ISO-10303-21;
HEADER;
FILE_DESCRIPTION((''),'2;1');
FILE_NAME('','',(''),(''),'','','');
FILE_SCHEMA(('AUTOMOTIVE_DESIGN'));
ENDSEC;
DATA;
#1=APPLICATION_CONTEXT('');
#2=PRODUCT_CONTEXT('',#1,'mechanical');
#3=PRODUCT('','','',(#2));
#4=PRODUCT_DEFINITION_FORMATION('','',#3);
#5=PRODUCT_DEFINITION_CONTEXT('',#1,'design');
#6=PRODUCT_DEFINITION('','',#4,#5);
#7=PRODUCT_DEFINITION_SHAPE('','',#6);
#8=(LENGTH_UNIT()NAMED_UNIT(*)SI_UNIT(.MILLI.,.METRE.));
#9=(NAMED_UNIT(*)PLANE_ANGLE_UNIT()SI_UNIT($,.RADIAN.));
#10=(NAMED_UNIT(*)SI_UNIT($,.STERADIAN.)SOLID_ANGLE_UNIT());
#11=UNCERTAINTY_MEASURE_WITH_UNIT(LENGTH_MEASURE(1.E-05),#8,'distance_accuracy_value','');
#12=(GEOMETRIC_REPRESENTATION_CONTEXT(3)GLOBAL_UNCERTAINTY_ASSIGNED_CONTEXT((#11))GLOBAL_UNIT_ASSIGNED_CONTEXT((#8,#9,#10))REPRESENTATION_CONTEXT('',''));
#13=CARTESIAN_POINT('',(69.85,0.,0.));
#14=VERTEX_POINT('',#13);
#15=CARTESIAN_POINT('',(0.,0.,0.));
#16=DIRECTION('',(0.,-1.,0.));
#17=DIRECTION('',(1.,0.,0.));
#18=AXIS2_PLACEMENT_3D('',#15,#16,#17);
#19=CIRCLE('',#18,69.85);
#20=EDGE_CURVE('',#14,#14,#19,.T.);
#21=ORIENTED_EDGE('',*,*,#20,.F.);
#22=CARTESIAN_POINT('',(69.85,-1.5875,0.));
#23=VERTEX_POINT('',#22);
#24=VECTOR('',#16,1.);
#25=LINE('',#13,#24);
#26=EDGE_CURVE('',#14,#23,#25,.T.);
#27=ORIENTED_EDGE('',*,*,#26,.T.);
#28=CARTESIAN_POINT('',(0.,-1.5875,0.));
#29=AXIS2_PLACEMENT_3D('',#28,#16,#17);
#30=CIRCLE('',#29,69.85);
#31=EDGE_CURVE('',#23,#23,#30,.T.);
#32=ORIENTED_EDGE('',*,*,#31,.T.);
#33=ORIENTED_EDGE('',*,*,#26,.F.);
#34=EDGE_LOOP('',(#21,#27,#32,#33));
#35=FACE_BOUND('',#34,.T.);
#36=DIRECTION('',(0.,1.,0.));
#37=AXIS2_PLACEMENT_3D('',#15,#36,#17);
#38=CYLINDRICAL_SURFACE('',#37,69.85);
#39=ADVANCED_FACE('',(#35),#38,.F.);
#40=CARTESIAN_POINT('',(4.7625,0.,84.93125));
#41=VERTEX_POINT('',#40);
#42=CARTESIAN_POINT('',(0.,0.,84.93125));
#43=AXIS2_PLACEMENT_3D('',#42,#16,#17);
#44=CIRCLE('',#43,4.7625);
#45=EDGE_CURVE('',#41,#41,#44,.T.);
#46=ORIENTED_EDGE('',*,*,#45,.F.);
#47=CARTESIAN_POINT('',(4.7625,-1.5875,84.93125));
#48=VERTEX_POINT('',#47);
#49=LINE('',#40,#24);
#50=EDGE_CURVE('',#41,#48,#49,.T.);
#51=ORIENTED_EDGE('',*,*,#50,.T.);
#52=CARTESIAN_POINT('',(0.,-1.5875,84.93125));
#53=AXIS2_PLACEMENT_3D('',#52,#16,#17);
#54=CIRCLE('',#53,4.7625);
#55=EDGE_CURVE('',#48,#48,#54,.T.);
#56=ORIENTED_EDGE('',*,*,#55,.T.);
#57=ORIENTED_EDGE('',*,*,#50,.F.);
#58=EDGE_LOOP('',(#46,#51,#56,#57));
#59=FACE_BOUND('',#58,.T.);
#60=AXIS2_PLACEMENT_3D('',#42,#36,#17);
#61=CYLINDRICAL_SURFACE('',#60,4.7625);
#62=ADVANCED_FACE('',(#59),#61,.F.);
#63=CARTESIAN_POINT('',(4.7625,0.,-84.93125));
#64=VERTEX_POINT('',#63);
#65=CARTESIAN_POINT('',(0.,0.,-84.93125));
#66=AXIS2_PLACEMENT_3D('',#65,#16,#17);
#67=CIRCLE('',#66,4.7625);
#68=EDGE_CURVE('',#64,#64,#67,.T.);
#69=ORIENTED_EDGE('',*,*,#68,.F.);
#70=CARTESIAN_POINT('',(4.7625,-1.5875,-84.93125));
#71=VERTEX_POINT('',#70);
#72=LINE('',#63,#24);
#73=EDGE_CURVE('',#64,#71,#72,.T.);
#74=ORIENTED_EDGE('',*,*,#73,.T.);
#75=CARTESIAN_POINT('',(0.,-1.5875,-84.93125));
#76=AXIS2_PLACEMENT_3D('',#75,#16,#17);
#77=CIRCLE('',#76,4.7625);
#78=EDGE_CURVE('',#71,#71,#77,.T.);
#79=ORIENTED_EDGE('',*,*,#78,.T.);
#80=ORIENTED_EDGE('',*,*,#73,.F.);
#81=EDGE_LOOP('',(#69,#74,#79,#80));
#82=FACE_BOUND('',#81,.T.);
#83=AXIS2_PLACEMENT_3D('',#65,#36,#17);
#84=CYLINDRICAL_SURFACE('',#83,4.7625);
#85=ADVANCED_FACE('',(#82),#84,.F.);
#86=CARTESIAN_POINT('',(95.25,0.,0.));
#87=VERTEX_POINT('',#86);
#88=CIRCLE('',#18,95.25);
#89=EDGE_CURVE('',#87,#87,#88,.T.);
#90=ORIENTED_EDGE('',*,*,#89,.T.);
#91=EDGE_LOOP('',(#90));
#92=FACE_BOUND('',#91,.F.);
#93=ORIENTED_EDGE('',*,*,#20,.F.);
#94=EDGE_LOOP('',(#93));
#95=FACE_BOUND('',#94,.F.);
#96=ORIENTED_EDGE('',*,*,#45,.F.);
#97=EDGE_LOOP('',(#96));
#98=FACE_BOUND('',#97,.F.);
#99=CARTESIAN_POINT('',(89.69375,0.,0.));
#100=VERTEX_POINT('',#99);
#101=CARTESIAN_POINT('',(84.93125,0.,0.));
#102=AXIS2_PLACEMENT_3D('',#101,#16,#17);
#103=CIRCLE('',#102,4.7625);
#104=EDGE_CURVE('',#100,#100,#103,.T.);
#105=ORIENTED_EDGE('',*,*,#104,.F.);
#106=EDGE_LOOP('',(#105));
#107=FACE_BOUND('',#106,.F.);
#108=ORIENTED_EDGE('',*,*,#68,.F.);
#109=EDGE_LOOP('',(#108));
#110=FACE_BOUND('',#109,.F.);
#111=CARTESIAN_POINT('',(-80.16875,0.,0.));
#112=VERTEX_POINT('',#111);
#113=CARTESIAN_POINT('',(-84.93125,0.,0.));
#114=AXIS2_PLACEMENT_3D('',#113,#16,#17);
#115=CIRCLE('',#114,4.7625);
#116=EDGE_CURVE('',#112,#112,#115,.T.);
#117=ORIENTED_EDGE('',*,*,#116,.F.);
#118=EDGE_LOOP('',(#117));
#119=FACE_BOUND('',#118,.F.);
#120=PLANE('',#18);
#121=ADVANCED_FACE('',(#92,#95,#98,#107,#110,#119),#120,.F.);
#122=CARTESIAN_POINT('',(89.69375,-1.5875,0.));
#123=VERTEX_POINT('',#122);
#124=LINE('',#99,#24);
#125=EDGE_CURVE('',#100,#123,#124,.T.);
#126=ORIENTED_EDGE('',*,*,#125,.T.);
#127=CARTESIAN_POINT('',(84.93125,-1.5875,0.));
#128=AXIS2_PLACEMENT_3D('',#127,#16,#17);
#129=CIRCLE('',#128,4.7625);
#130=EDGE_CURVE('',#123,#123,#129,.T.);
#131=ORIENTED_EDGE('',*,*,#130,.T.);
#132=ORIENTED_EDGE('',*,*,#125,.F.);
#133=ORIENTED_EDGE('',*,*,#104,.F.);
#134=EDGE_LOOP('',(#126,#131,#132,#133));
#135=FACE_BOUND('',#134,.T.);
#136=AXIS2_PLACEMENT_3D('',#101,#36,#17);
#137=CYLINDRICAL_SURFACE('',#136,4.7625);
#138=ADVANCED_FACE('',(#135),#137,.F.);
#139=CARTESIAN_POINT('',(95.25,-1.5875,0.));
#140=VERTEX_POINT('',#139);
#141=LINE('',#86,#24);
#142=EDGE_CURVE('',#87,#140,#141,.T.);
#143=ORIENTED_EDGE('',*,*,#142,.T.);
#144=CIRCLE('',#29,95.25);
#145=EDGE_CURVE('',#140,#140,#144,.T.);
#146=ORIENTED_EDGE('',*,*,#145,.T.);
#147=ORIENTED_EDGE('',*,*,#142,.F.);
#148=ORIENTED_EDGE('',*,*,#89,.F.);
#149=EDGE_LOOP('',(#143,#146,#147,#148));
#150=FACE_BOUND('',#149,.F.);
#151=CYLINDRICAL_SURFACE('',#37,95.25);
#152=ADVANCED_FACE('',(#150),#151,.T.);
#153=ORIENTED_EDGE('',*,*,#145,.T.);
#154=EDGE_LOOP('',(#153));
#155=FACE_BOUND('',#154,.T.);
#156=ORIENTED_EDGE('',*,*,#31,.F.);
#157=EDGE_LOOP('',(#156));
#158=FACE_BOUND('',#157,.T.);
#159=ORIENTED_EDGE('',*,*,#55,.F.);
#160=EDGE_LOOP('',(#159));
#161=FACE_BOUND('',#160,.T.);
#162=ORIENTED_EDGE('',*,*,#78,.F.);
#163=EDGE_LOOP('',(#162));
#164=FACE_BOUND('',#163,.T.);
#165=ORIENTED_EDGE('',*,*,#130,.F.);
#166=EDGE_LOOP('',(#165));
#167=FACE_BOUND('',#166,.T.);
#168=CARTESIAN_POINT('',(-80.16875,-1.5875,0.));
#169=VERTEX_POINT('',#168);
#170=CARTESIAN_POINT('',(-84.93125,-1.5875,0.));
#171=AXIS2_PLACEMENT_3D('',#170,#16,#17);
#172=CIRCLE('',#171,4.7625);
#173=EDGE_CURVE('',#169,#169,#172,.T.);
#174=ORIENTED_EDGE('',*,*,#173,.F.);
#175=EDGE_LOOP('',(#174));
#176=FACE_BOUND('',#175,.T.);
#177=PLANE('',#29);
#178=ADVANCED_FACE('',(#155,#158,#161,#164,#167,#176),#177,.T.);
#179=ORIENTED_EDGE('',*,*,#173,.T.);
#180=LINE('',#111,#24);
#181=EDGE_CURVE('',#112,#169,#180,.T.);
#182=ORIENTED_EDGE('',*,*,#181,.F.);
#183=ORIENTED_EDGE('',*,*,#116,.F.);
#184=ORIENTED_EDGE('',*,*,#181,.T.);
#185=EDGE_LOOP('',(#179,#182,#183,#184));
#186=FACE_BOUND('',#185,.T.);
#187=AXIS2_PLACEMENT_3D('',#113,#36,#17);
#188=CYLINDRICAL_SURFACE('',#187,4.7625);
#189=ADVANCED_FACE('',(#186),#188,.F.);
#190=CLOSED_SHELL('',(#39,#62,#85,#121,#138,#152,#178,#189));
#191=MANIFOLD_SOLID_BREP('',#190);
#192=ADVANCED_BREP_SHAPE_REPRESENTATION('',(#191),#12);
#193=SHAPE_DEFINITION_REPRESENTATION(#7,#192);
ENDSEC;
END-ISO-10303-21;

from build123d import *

# Parameters (mm, degrees)
F0_R     = 95.25
F0_R_2   = 4.7625
F0_R_3   = 69.85
F1_DEPTH = 1.5875


# Not quite as in the source:
# - a length typed as a fraction of an inch, garbled in the dataset ("3 / 203.2 mm" for 3/8 in), is restored


with BuildPart() as f1:
    # F0 (on Front) → F1 (new body)
    with BuildSketch(Plane.XZ):
        Circle(F0_R)
        with Locations((0, -84.93125)):
            Circle(F0_R_2, mode=Mode.SUBTRACT)
        with Locations((-84.93125, 0)):
            Circle(F0_R_2, mode=Mode.SUBTRACT)
        Circle(F0_R_3, mode=Mode.SUBTRACT)
        with Locations((84.93125, 0)):
            Circle(F0_R_2, mode=Mode.SUBTRACT)
        with Locations((0, 84.93125)):
            Circle(F0_R_2, mode=Mode.SUBTRACT)
    extrude(amount=F1_DEPTH)


solid = f1.part
